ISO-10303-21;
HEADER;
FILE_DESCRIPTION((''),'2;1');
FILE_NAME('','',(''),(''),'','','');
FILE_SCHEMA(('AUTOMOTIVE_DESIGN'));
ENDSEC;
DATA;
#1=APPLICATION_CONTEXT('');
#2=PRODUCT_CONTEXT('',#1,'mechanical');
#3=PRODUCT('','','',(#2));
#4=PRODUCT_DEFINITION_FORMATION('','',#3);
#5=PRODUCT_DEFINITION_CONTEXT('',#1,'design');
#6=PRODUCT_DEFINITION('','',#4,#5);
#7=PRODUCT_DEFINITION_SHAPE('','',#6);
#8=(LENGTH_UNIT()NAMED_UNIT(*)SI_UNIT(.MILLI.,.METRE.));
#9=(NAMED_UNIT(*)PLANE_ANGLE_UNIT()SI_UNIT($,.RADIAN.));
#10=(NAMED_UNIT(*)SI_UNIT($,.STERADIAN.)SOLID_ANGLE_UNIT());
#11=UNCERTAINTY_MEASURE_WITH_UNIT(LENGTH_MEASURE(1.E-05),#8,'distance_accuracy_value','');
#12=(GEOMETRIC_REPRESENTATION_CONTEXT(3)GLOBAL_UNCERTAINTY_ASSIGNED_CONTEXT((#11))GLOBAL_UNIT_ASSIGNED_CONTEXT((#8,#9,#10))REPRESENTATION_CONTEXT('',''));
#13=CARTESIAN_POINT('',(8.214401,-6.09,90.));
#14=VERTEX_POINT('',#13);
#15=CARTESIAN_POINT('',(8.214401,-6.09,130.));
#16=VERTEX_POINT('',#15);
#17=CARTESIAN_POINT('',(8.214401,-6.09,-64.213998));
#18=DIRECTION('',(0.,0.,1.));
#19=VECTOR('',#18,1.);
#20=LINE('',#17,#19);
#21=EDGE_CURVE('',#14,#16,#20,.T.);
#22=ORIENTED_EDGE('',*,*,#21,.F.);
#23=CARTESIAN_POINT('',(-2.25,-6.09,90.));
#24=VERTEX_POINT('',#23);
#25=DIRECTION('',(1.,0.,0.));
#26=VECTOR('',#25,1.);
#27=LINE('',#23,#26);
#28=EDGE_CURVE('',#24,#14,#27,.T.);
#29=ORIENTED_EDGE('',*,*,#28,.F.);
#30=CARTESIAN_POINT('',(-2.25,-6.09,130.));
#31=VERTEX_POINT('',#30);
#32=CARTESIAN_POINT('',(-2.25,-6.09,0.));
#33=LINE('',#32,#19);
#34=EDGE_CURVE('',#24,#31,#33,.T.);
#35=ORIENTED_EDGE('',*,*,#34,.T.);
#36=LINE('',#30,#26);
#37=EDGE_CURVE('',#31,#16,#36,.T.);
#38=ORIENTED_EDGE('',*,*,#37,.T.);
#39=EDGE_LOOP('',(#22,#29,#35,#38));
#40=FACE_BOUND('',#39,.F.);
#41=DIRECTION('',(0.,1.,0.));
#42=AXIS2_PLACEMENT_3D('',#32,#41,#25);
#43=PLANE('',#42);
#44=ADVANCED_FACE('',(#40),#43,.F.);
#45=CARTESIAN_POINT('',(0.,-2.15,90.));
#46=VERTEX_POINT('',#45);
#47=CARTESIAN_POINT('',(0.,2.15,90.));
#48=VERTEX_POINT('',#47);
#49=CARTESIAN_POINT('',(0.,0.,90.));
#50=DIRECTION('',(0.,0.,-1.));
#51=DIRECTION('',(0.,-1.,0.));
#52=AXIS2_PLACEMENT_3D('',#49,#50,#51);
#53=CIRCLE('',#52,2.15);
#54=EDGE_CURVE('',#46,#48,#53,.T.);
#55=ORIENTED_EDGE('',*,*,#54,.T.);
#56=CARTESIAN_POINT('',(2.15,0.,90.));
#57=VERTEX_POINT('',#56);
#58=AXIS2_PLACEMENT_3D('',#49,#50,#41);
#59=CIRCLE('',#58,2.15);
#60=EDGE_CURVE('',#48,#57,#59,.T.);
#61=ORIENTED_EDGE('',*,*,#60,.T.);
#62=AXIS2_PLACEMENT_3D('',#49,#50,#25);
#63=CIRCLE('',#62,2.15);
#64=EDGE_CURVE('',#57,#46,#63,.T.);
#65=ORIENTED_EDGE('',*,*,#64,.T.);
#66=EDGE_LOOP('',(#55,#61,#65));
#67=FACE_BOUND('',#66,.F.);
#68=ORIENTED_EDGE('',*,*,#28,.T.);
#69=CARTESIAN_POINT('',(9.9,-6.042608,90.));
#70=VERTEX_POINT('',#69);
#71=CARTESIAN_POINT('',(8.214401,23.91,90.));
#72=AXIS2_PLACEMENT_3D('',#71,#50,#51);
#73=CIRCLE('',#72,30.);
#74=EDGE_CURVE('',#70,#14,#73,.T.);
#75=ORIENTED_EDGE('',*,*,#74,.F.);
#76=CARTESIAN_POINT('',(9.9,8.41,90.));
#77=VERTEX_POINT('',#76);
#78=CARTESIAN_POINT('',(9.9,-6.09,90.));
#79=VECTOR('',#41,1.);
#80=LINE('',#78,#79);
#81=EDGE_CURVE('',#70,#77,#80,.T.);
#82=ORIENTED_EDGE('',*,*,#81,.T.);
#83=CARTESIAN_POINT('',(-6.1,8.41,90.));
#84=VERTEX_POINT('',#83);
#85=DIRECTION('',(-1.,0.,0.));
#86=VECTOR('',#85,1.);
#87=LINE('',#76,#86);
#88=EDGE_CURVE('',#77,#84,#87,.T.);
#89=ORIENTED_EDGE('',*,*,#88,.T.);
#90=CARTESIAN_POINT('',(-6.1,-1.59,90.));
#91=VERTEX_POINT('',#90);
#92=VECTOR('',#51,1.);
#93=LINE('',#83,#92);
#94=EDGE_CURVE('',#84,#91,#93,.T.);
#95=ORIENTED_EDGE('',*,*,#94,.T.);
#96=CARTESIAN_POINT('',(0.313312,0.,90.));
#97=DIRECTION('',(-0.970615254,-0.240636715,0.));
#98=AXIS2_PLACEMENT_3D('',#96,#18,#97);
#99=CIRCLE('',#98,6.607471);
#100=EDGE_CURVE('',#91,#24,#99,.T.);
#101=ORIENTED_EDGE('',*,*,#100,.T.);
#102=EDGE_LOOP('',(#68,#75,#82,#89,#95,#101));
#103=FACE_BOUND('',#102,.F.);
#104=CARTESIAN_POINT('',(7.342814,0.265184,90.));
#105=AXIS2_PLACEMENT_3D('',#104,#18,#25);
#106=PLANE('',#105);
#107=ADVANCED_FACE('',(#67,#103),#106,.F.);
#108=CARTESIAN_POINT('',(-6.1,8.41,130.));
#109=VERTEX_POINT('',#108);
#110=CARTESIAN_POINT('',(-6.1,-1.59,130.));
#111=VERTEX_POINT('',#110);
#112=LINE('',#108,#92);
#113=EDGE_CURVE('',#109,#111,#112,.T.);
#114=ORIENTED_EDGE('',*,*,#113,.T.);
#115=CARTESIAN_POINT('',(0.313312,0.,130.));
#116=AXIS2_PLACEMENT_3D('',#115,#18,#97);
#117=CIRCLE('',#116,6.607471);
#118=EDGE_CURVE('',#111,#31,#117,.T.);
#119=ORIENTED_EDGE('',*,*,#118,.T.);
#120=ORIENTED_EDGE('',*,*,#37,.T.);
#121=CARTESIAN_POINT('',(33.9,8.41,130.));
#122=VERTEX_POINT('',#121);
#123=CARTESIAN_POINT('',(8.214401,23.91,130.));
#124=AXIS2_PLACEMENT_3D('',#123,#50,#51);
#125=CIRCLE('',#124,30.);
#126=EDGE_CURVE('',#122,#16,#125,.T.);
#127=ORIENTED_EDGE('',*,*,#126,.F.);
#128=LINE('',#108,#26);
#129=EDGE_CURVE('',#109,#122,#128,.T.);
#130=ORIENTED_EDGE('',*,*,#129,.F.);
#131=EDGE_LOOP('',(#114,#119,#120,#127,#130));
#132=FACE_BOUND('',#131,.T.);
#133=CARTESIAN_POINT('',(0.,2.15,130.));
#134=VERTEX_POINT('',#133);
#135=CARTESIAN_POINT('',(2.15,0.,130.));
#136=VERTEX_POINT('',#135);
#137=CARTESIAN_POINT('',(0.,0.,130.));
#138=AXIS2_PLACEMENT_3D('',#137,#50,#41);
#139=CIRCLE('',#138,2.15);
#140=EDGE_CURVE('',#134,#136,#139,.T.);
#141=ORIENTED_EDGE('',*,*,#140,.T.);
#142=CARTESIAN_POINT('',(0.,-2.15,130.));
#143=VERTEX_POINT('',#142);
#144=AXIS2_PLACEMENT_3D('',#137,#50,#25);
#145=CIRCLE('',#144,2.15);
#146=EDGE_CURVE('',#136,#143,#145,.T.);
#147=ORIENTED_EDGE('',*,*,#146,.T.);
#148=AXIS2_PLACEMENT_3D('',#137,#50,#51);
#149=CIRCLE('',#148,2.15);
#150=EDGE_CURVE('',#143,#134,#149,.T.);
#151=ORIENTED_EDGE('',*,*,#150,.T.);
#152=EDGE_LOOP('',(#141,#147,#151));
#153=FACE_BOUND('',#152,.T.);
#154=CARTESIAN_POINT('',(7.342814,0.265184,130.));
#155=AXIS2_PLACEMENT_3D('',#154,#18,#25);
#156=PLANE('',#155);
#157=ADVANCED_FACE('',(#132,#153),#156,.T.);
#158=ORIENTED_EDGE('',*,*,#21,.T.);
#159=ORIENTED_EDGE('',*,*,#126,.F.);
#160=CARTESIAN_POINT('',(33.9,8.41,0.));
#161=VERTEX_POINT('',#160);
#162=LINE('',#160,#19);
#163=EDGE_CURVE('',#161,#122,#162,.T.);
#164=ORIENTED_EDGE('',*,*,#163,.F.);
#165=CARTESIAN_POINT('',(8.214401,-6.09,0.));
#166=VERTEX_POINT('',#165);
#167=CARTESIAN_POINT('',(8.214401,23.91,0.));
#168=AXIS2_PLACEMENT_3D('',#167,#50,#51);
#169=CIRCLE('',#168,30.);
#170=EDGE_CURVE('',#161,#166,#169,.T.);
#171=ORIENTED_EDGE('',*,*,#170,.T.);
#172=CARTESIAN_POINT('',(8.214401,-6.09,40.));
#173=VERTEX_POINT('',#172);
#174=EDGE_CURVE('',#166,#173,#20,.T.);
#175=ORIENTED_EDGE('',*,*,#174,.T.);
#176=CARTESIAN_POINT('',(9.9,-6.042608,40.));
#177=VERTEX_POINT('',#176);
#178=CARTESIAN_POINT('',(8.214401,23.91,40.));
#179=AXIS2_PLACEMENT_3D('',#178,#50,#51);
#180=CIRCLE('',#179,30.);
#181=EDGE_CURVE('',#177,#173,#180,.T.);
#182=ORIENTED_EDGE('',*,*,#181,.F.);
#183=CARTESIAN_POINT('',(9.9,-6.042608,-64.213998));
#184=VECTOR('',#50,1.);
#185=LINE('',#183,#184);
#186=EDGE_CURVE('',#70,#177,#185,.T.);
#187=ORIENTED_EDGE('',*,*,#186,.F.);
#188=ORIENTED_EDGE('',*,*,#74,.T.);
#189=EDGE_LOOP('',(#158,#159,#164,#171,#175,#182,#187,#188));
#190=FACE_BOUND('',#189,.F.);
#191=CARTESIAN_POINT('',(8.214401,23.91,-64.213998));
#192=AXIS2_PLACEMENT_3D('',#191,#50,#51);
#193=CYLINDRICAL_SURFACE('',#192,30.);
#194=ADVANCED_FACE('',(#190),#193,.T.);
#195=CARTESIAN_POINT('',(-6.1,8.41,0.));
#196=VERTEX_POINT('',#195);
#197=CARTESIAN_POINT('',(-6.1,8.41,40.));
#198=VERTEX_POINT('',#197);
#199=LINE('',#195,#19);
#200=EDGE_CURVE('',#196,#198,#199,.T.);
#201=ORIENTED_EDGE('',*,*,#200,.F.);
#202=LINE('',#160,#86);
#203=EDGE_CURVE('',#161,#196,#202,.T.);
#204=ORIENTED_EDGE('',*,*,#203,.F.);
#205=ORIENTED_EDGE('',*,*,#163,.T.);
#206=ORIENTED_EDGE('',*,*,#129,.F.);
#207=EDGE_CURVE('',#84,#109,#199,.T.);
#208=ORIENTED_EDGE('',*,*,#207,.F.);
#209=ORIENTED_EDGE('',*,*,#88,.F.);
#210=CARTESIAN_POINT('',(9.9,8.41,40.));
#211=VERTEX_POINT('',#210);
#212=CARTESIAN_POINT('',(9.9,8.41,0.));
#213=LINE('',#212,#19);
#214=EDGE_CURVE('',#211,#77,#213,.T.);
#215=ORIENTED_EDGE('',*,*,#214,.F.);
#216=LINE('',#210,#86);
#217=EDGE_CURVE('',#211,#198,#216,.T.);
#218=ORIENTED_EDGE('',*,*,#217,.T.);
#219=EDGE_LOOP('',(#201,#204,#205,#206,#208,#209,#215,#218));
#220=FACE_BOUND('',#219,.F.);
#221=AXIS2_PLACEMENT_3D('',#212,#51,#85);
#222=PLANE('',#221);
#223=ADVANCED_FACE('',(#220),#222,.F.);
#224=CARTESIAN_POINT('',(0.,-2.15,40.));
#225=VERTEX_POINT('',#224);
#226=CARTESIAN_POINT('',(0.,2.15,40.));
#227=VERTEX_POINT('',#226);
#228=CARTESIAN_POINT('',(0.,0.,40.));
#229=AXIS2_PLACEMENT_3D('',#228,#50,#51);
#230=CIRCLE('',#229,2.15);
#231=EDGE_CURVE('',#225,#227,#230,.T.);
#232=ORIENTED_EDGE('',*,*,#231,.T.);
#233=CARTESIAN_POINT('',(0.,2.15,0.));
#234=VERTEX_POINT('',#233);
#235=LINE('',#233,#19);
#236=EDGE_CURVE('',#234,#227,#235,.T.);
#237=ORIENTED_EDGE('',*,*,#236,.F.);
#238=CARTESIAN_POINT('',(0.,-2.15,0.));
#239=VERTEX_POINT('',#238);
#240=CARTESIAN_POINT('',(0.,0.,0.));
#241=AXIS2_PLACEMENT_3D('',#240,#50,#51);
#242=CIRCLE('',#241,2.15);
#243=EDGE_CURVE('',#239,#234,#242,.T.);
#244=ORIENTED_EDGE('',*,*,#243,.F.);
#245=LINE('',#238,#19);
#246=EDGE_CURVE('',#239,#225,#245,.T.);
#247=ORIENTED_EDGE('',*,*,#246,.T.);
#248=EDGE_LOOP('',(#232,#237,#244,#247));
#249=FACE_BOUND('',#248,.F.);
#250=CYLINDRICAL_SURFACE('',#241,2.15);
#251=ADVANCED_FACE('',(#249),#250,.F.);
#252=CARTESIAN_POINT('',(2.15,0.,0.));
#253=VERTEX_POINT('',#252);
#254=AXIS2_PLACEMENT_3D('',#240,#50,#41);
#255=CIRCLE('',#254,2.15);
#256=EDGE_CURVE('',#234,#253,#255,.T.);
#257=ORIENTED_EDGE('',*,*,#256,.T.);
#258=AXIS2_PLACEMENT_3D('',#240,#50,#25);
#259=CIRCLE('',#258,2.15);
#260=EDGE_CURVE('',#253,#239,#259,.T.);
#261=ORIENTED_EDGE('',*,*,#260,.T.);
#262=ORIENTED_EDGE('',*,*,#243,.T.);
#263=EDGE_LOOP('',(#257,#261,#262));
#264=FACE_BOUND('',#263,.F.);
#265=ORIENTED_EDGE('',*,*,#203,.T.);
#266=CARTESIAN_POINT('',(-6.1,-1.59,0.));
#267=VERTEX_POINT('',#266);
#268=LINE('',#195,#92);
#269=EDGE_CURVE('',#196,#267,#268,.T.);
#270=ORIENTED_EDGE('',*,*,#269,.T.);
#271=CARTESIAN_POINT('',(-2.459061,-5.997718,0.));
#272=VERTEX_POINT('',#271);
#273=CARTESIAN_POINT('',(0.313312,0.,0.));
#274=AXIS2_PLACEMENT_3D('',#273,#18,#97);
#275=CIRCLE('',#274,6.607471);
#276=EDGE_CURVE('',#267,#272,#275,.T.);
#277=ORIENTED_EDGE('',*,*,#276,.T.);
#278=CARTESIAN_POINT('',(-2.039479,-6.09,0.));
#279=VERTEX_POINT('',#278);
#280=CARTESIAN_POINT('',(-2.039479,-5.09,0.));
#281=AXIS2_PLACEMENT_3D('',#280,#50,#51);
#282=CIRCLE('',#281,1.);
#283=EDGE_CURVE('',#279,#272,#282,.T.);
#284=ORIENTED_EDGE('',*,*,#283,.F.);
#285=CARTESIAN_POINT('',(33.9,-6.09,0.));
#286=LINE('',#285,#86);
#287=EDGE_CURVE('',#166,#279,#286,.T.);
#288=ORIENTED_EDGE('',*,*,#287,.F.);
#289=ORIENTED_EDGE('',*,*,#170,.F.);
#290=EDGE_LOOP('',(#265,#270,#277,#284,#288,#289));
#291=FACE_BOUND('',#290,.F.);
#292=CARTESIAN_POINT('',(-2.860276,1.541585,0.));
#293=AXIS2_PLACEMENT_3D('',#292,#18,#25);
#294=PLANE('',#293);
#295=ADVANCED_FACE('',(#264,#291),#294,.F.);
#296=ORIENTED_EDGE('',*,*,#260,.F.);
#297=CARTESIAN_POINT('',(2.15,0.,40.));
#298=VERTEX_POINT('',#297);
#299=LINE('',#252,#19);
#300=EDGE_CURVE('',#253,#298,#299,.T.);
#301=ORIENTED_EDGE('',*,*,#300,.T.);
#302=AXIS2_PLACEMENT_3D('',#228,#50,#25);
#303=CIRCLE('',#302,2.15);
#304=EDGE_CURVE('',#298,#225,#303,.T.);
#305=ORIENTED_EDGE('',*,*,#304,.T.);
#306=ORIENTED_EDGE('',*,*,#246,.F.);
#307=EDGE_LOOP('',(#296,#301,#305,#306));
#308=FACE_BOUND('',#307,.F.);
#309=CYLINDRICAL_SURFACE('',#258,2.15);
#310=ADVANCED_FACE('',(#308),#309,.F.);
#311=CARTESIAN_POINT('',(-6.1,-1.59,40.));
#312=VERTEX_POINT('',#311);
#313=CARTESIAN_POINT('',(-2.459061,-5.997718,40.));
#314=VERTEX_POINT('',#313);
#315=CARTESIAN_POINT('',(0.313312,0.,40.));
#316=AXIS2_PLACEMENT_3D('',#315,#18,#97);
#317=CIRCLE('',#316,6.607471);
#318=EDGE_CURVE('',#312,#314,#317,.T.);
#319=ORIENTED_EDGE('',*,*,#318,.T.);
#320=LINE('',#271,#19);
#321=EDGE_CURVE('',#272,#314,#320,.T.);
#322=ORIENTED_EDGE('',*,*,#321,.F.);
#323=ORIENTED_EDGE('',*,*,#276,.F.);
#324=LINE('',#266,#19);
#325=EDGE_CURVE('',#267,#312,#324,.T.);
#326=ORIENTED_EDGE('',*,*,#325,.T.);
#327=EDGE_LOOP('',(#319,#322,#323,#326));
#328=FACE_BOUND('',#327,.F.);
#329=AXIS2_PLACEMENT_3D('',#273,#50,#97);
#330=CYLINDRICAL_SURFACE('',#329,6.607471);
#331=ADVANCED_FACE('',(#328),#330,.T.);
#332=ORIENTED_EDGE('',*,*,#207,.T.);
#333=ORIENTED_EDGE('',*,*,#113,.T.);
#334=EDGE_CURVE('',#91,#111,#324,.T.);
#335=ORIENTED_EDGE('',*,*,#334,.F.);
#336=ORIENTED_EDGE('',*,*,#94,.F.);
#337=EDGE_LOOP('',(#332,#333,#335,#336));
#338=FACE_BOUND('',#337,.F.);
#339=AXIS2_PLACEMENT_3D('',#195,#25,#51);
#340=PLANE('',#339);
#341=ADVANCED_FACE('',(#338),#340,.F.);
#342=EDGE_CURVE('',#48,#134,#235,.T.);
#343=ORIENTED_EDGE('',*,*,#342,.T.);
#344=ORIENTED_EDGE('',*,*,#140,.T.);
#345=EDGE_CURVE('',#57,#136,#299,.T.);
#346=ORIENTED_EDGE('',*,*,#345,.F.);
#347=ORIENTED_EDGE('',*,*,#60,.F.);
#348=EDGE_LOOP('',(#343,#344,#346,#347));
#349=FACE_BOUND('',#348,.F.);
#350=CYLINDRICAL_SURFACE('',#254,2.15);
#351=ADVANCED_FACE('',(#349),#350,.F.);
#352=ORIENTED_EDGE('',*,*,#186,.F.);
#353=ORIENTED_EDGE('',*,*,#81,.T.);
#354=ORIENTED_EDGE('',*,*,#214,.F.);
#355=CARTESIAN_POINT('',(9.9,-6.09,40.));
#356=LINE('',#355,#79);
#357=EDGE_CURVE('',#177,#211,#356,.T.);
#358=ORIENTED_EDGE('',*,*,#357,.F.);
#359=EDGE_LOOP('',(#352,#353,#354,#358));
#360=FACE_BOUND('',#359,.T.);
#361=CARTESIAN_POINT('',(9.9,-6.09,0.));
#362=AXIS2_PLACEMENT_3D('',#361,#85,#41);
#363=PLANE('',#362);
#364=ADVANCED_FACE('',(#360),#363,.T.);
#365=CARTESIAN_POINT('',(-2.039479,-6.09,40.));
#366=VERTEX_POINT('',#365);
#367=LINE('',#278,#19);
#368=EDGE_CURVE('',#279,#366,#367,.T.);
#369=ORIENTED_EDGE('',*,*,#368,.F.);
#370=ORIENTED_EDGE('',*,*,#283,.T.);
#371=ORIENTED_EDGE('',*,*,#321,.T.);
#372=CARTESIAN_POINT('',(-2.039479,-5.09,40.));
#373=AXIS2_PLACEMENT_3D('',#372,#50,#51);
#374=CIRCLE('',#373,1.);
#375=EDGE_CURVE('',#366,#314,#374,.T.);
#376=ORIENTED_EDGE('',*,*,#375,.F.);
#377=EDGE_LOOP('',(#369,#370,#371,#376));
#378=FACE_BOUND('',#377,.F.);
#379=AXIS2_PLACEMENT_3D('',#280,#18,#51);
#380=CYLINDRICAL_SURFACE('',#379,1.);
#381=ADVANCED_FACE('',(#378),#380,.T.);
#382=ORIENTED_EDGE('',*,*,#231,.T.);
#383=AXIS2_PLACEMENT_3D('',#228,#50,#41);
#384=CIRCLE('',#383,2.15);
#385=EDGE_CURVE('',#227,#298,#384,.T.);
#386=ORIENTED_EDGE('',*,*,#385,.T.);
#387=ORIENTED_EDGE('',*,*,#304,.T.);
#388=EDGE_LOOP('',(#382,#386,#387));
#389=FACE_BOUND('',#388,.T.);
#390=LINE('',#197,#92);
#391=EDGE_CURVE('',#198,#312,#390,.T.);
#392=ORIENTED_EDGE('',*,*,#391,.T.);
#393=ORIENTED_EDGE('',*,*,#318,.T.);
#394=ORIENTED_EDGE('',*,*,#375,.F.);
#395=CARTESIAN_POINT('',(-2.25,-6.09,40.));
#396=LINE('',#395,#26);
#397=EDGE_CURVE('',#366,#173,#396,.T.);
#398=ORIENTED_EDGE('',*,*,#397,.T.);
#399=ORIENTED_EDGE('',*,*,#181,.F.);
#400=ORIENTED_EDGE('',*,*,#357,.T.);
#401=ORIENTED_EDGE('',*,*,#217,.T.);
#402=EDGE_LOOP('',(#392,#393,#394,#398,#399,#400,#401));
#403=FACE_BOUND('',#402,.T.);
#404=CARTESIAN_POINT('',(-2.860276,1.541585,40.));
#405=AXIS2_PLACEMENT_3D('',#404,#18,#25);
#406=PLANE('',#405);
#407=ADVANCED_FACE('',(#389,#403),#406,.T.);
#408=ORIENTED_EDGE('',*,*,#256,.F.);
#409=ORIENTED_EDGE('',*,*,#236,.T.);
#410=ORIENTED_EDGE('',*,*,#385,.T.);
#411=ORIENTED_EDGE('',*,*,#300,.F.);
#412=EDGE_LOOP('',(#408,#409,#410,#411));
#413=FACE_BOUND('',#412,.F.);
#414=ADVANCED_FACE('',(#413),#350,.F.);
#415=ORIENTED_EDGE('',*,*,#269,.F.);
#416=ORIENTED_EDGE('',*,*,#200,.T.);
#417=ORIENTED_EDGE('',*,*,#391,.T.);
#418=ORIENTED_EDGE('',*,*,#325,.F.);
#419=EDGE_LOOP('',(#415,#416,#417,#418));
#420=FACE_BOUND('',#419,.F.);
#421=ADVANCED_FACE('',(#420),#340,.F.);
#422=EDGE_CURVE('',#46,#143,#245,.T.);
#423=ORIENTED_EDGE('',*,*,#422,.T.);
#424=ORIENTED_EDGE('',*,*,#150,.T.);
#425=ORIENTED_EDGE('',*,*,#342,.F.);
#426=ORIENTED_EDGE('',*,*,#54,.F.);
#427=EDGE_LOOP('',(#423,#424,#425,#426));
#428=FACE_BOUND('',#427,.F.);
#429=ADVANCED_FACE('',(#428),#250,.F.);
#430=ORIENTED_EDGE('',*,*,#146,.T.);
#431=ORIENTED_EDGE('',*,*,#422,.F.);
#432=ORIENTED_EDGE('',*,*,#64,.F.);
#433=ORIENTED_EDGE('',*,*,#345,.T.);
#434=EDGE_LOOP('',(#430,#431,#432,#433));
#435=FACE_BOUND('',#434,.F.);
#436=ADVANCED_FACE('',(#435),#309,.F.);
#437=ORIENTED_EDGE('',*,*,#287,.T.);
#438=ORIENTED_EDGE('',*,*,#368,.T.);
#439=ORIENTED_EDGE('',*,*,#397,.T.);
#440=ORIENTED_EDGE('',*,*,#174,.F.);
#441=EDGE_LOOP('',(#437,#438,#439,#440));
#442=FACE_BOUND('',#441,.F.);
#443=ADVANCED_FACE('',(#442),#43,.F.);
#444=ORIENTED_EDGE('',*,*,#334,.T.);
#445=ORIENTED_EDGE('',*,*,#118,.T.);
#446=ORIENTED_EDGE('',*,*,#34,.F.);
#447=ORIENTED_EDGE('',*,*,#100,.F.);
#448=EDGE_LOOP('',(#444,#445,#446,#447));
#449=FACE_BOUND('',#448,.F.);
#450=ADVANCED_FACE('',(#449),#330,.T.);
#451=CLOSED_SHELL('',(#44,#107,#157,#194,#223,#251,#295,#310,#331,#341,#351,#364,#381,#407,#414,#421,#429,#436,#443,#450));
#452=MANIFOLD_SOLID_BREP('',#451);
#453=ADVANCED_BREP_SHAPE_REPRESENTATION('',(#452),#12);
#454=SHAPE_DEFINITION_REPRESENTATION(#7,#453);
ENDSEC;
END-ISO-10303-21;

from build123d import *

# Parameters (mm, degrees)
F0_W        = 24
F0_H        = 14.5
F1_DEPTH    = 130
F2_DEPTH    = 130
F3_DEPTH    = 90
F4_DEPTH    = 40
F5_R        = 1
F6_T1_DEPTH = 258.4279953904


# Not quite as in the source:
# - a fillet or chamfer that OpenCascade refuses, or shapes differently, is made with other operations: its cross-section is extruded or revolved along the edge and cut away or added


with BuildPart() as f1:
    # F0 (on Top) → F1 (new body)
    with BuildSketch(Plane.XY):
        with Locations((21.9, 1.16)):
            Rectangle(F0_W, F0_H)
    extrude(amount=F1_DEPTH)

    # F0 (on Top) → F2 (join)
    with BuildSketch(Plane.XY):
        with BuildLine():
            Line((9.9, 8.41), (6.1, 8.41))
            Line((6.1, 8.41), (6.1, -1.59))
            ThreePointArc((6.1, -1.59), (4.7073896383, -4.2954889128), (2.25, -6.09))
            Line((2.25, -6.09), (9.9, -6.09))
            Line((9.9, -6.09), (9.9, 8.41))
        make_face()
        with BuildLine():
            Line((6.1, -1.59), (6.1, 8.41))
            Line((6.1, 8.41), (0, 8.41))
            Line((0, 8.41), (0, 2.15))
            ThreePointArc((0, 2.15), (1.5202795796, 1.5202795796), (2.15, 0))
            ThreePointArc((2.15, 0), (1.5202795796, -1.5202795796), (0, -2.15))
            Line((0, -2.15), (0, -6.09))
            Line((0, -6.09), (2.25, -6.09))
            ThreePointArc((2.25, -6.09), (4.7073896383, -4.2954889128), (6.1, -1.59))
        make_face()
        with BuildLine():
            Line((0, 2.15), (0, 8.41))
            Line((0, 8.41), (-6.1, 8.41))
            Line((-6.1, 8.41), (-6.1, -1.59))
            ThreePointArc((-6.1, -1.59), (-4.7073896383, -4.2954889128), (-2.25, -6.09))
            Line((-2.25, -6.09), (0, -6.09))
            Line((0, -6.09), (0, -2.15))
            ThreePointArc((0, -2.15), (-2.15, 0), (0, 2.15))
        make_face()
    extrude(amount=F2_DEPTH)

    # F0 (on Top) → F3 (cut)
    with BuildSketch(Plane.XY):
        with BuildLine():
            Line((9.9, 8.41), (6.1, 8.41))
            Line((6.1, 8.41), (6.1, -1.59))
            ThreePointArc((6.1, -1.59), (4.7073896383, -4.2954889128), (2.25, -6.09))
            Line((2.25, -6.09), (9.9, -6.09))
            Line((9.9, -6.09), (9.9, 8.41))
        make_face()
        with BuildLine():
            Line((6.1, -1.59), (6.1, 8.41))
            Line((6.1, 8.41), (0, 8.41))
            Line((0, 8.41), (0, 2.15))
            ThreePointArc((0, 2.15), (1.5202795796, 1.5202795796), (2.15, 0))
            ThreePointArc((2.15, 0), (1.5202795796, -1.5202795796), (0, -2.15))
            Line((0, -2.15), (0, -6.09))
            Line((0, -6.09), (2.25, -6.09))
            ThreePointArc((2.25, -6.09), (4.7073896383, -4.2954889128), (6.1, -1.59))
        make_face()
        with BuildLine():
            Line((0, 2.15), (0, 8.41))
            Line((0, 8.41), (-6.1, 8.41))
            Line((-6.1, 8.41), (-6.1, -1.59))
            ThreePointArc((-6.1, -1.59), (-4.7073896383, -4.2954889128), (-2.25, -6.09))
            Line((-2.25, -6.09), (0, -6.09))
            Line((0, -6.09), (0, -2.15))
            ThreePointArc((0, -2.15), (-2.15, 0), (0, 2.15))
        make_face()
    extrude(amount=F3_DEPTH, mode=Mode.SUBTRACT)

    # F0 (on Top) → F4 (join)
    with BuildSketch(Plane.XY):
        with BuildLine():
            Line((0, 2.15), (0, 8.41))
            Line((0, 8.41), (-6.1, 8.41))
            Line((-6.1, 8.41), (-6.1, -1.59))
            ThreePointArc((-6.1, -1.59), (-4.7073896383, -4.2954889128), (-2.25, -6.09))
            Line((-2.25, -6.09), (0, -6.09))
            Line((0, -6.09), (0, -2.15))
            ThreePointArc((0, -2.15), (-2.15, 0), (0, 2.15))
        make_face()
        with BuildLine():
            Line((6.1, -1.59), (6.1, 8.41))
            Line((6.1, 8.41), (0, 8.41))
            Line((0, 8.41), (0, 2.15))
            ThreePointArc((0, 2.15), (1.5202795796, 1.5202795796), (2.15, 0))
            ThreePointArc((2.15, 0), (1.5202795796, -1.5202795796), (0, -2.15))
            Line((0, -2.15), (0, -6.09))
            Line((0, -6.09), (2.25, -6.09))
            ThreePointArc((2.25, -6.09), (4.7073896383, -4.2954889128), (6.1, -1.59))
        make_face()
        with BuildLine():
            Line((9.9, 8.41), (6.1, 8.41))
            Line((6.1, 8.41), (6.1, -1.59))
            ThreePointArc((6.1, -1.59), (4.7073896383, -4.2954889128), (2.25, -6.09))
            Line((2.25, -6.09), (9.9, -6.09))
            Line((9.9, -6.09), (9.9, 8.41))
        make_face()
    extrude(amount=F4_DEPTH)

    # F5
    f5_edges = [f1.edges().sort_by_distance(p)[0] for p in [
        (-2.25, -6.09, 20),
    ]]
    fillet(f5_edges, radius=F5_R)

    # F6: fillet of radius 30 on 1 edges, made by hand

    # F6_s2 → F6_t1 (cut)
    with BuildSketch(Plane.XY.offset(-64.2139976952)):
        with BuildLine():
            ThreePointArc((8.2144009219, -6.09), (22.9622821257, -2.2147009552), (33.9, 8.41))
            Line((33.9, 8.41), (33.9, -6.09))
            Line((33.9, -6.09), (8.2144009219, -6.09))
        make_face()
    extrude(amount=F6_T1_DEPTH, mode=Mode.SUBTRACT)


solid = f1.part
